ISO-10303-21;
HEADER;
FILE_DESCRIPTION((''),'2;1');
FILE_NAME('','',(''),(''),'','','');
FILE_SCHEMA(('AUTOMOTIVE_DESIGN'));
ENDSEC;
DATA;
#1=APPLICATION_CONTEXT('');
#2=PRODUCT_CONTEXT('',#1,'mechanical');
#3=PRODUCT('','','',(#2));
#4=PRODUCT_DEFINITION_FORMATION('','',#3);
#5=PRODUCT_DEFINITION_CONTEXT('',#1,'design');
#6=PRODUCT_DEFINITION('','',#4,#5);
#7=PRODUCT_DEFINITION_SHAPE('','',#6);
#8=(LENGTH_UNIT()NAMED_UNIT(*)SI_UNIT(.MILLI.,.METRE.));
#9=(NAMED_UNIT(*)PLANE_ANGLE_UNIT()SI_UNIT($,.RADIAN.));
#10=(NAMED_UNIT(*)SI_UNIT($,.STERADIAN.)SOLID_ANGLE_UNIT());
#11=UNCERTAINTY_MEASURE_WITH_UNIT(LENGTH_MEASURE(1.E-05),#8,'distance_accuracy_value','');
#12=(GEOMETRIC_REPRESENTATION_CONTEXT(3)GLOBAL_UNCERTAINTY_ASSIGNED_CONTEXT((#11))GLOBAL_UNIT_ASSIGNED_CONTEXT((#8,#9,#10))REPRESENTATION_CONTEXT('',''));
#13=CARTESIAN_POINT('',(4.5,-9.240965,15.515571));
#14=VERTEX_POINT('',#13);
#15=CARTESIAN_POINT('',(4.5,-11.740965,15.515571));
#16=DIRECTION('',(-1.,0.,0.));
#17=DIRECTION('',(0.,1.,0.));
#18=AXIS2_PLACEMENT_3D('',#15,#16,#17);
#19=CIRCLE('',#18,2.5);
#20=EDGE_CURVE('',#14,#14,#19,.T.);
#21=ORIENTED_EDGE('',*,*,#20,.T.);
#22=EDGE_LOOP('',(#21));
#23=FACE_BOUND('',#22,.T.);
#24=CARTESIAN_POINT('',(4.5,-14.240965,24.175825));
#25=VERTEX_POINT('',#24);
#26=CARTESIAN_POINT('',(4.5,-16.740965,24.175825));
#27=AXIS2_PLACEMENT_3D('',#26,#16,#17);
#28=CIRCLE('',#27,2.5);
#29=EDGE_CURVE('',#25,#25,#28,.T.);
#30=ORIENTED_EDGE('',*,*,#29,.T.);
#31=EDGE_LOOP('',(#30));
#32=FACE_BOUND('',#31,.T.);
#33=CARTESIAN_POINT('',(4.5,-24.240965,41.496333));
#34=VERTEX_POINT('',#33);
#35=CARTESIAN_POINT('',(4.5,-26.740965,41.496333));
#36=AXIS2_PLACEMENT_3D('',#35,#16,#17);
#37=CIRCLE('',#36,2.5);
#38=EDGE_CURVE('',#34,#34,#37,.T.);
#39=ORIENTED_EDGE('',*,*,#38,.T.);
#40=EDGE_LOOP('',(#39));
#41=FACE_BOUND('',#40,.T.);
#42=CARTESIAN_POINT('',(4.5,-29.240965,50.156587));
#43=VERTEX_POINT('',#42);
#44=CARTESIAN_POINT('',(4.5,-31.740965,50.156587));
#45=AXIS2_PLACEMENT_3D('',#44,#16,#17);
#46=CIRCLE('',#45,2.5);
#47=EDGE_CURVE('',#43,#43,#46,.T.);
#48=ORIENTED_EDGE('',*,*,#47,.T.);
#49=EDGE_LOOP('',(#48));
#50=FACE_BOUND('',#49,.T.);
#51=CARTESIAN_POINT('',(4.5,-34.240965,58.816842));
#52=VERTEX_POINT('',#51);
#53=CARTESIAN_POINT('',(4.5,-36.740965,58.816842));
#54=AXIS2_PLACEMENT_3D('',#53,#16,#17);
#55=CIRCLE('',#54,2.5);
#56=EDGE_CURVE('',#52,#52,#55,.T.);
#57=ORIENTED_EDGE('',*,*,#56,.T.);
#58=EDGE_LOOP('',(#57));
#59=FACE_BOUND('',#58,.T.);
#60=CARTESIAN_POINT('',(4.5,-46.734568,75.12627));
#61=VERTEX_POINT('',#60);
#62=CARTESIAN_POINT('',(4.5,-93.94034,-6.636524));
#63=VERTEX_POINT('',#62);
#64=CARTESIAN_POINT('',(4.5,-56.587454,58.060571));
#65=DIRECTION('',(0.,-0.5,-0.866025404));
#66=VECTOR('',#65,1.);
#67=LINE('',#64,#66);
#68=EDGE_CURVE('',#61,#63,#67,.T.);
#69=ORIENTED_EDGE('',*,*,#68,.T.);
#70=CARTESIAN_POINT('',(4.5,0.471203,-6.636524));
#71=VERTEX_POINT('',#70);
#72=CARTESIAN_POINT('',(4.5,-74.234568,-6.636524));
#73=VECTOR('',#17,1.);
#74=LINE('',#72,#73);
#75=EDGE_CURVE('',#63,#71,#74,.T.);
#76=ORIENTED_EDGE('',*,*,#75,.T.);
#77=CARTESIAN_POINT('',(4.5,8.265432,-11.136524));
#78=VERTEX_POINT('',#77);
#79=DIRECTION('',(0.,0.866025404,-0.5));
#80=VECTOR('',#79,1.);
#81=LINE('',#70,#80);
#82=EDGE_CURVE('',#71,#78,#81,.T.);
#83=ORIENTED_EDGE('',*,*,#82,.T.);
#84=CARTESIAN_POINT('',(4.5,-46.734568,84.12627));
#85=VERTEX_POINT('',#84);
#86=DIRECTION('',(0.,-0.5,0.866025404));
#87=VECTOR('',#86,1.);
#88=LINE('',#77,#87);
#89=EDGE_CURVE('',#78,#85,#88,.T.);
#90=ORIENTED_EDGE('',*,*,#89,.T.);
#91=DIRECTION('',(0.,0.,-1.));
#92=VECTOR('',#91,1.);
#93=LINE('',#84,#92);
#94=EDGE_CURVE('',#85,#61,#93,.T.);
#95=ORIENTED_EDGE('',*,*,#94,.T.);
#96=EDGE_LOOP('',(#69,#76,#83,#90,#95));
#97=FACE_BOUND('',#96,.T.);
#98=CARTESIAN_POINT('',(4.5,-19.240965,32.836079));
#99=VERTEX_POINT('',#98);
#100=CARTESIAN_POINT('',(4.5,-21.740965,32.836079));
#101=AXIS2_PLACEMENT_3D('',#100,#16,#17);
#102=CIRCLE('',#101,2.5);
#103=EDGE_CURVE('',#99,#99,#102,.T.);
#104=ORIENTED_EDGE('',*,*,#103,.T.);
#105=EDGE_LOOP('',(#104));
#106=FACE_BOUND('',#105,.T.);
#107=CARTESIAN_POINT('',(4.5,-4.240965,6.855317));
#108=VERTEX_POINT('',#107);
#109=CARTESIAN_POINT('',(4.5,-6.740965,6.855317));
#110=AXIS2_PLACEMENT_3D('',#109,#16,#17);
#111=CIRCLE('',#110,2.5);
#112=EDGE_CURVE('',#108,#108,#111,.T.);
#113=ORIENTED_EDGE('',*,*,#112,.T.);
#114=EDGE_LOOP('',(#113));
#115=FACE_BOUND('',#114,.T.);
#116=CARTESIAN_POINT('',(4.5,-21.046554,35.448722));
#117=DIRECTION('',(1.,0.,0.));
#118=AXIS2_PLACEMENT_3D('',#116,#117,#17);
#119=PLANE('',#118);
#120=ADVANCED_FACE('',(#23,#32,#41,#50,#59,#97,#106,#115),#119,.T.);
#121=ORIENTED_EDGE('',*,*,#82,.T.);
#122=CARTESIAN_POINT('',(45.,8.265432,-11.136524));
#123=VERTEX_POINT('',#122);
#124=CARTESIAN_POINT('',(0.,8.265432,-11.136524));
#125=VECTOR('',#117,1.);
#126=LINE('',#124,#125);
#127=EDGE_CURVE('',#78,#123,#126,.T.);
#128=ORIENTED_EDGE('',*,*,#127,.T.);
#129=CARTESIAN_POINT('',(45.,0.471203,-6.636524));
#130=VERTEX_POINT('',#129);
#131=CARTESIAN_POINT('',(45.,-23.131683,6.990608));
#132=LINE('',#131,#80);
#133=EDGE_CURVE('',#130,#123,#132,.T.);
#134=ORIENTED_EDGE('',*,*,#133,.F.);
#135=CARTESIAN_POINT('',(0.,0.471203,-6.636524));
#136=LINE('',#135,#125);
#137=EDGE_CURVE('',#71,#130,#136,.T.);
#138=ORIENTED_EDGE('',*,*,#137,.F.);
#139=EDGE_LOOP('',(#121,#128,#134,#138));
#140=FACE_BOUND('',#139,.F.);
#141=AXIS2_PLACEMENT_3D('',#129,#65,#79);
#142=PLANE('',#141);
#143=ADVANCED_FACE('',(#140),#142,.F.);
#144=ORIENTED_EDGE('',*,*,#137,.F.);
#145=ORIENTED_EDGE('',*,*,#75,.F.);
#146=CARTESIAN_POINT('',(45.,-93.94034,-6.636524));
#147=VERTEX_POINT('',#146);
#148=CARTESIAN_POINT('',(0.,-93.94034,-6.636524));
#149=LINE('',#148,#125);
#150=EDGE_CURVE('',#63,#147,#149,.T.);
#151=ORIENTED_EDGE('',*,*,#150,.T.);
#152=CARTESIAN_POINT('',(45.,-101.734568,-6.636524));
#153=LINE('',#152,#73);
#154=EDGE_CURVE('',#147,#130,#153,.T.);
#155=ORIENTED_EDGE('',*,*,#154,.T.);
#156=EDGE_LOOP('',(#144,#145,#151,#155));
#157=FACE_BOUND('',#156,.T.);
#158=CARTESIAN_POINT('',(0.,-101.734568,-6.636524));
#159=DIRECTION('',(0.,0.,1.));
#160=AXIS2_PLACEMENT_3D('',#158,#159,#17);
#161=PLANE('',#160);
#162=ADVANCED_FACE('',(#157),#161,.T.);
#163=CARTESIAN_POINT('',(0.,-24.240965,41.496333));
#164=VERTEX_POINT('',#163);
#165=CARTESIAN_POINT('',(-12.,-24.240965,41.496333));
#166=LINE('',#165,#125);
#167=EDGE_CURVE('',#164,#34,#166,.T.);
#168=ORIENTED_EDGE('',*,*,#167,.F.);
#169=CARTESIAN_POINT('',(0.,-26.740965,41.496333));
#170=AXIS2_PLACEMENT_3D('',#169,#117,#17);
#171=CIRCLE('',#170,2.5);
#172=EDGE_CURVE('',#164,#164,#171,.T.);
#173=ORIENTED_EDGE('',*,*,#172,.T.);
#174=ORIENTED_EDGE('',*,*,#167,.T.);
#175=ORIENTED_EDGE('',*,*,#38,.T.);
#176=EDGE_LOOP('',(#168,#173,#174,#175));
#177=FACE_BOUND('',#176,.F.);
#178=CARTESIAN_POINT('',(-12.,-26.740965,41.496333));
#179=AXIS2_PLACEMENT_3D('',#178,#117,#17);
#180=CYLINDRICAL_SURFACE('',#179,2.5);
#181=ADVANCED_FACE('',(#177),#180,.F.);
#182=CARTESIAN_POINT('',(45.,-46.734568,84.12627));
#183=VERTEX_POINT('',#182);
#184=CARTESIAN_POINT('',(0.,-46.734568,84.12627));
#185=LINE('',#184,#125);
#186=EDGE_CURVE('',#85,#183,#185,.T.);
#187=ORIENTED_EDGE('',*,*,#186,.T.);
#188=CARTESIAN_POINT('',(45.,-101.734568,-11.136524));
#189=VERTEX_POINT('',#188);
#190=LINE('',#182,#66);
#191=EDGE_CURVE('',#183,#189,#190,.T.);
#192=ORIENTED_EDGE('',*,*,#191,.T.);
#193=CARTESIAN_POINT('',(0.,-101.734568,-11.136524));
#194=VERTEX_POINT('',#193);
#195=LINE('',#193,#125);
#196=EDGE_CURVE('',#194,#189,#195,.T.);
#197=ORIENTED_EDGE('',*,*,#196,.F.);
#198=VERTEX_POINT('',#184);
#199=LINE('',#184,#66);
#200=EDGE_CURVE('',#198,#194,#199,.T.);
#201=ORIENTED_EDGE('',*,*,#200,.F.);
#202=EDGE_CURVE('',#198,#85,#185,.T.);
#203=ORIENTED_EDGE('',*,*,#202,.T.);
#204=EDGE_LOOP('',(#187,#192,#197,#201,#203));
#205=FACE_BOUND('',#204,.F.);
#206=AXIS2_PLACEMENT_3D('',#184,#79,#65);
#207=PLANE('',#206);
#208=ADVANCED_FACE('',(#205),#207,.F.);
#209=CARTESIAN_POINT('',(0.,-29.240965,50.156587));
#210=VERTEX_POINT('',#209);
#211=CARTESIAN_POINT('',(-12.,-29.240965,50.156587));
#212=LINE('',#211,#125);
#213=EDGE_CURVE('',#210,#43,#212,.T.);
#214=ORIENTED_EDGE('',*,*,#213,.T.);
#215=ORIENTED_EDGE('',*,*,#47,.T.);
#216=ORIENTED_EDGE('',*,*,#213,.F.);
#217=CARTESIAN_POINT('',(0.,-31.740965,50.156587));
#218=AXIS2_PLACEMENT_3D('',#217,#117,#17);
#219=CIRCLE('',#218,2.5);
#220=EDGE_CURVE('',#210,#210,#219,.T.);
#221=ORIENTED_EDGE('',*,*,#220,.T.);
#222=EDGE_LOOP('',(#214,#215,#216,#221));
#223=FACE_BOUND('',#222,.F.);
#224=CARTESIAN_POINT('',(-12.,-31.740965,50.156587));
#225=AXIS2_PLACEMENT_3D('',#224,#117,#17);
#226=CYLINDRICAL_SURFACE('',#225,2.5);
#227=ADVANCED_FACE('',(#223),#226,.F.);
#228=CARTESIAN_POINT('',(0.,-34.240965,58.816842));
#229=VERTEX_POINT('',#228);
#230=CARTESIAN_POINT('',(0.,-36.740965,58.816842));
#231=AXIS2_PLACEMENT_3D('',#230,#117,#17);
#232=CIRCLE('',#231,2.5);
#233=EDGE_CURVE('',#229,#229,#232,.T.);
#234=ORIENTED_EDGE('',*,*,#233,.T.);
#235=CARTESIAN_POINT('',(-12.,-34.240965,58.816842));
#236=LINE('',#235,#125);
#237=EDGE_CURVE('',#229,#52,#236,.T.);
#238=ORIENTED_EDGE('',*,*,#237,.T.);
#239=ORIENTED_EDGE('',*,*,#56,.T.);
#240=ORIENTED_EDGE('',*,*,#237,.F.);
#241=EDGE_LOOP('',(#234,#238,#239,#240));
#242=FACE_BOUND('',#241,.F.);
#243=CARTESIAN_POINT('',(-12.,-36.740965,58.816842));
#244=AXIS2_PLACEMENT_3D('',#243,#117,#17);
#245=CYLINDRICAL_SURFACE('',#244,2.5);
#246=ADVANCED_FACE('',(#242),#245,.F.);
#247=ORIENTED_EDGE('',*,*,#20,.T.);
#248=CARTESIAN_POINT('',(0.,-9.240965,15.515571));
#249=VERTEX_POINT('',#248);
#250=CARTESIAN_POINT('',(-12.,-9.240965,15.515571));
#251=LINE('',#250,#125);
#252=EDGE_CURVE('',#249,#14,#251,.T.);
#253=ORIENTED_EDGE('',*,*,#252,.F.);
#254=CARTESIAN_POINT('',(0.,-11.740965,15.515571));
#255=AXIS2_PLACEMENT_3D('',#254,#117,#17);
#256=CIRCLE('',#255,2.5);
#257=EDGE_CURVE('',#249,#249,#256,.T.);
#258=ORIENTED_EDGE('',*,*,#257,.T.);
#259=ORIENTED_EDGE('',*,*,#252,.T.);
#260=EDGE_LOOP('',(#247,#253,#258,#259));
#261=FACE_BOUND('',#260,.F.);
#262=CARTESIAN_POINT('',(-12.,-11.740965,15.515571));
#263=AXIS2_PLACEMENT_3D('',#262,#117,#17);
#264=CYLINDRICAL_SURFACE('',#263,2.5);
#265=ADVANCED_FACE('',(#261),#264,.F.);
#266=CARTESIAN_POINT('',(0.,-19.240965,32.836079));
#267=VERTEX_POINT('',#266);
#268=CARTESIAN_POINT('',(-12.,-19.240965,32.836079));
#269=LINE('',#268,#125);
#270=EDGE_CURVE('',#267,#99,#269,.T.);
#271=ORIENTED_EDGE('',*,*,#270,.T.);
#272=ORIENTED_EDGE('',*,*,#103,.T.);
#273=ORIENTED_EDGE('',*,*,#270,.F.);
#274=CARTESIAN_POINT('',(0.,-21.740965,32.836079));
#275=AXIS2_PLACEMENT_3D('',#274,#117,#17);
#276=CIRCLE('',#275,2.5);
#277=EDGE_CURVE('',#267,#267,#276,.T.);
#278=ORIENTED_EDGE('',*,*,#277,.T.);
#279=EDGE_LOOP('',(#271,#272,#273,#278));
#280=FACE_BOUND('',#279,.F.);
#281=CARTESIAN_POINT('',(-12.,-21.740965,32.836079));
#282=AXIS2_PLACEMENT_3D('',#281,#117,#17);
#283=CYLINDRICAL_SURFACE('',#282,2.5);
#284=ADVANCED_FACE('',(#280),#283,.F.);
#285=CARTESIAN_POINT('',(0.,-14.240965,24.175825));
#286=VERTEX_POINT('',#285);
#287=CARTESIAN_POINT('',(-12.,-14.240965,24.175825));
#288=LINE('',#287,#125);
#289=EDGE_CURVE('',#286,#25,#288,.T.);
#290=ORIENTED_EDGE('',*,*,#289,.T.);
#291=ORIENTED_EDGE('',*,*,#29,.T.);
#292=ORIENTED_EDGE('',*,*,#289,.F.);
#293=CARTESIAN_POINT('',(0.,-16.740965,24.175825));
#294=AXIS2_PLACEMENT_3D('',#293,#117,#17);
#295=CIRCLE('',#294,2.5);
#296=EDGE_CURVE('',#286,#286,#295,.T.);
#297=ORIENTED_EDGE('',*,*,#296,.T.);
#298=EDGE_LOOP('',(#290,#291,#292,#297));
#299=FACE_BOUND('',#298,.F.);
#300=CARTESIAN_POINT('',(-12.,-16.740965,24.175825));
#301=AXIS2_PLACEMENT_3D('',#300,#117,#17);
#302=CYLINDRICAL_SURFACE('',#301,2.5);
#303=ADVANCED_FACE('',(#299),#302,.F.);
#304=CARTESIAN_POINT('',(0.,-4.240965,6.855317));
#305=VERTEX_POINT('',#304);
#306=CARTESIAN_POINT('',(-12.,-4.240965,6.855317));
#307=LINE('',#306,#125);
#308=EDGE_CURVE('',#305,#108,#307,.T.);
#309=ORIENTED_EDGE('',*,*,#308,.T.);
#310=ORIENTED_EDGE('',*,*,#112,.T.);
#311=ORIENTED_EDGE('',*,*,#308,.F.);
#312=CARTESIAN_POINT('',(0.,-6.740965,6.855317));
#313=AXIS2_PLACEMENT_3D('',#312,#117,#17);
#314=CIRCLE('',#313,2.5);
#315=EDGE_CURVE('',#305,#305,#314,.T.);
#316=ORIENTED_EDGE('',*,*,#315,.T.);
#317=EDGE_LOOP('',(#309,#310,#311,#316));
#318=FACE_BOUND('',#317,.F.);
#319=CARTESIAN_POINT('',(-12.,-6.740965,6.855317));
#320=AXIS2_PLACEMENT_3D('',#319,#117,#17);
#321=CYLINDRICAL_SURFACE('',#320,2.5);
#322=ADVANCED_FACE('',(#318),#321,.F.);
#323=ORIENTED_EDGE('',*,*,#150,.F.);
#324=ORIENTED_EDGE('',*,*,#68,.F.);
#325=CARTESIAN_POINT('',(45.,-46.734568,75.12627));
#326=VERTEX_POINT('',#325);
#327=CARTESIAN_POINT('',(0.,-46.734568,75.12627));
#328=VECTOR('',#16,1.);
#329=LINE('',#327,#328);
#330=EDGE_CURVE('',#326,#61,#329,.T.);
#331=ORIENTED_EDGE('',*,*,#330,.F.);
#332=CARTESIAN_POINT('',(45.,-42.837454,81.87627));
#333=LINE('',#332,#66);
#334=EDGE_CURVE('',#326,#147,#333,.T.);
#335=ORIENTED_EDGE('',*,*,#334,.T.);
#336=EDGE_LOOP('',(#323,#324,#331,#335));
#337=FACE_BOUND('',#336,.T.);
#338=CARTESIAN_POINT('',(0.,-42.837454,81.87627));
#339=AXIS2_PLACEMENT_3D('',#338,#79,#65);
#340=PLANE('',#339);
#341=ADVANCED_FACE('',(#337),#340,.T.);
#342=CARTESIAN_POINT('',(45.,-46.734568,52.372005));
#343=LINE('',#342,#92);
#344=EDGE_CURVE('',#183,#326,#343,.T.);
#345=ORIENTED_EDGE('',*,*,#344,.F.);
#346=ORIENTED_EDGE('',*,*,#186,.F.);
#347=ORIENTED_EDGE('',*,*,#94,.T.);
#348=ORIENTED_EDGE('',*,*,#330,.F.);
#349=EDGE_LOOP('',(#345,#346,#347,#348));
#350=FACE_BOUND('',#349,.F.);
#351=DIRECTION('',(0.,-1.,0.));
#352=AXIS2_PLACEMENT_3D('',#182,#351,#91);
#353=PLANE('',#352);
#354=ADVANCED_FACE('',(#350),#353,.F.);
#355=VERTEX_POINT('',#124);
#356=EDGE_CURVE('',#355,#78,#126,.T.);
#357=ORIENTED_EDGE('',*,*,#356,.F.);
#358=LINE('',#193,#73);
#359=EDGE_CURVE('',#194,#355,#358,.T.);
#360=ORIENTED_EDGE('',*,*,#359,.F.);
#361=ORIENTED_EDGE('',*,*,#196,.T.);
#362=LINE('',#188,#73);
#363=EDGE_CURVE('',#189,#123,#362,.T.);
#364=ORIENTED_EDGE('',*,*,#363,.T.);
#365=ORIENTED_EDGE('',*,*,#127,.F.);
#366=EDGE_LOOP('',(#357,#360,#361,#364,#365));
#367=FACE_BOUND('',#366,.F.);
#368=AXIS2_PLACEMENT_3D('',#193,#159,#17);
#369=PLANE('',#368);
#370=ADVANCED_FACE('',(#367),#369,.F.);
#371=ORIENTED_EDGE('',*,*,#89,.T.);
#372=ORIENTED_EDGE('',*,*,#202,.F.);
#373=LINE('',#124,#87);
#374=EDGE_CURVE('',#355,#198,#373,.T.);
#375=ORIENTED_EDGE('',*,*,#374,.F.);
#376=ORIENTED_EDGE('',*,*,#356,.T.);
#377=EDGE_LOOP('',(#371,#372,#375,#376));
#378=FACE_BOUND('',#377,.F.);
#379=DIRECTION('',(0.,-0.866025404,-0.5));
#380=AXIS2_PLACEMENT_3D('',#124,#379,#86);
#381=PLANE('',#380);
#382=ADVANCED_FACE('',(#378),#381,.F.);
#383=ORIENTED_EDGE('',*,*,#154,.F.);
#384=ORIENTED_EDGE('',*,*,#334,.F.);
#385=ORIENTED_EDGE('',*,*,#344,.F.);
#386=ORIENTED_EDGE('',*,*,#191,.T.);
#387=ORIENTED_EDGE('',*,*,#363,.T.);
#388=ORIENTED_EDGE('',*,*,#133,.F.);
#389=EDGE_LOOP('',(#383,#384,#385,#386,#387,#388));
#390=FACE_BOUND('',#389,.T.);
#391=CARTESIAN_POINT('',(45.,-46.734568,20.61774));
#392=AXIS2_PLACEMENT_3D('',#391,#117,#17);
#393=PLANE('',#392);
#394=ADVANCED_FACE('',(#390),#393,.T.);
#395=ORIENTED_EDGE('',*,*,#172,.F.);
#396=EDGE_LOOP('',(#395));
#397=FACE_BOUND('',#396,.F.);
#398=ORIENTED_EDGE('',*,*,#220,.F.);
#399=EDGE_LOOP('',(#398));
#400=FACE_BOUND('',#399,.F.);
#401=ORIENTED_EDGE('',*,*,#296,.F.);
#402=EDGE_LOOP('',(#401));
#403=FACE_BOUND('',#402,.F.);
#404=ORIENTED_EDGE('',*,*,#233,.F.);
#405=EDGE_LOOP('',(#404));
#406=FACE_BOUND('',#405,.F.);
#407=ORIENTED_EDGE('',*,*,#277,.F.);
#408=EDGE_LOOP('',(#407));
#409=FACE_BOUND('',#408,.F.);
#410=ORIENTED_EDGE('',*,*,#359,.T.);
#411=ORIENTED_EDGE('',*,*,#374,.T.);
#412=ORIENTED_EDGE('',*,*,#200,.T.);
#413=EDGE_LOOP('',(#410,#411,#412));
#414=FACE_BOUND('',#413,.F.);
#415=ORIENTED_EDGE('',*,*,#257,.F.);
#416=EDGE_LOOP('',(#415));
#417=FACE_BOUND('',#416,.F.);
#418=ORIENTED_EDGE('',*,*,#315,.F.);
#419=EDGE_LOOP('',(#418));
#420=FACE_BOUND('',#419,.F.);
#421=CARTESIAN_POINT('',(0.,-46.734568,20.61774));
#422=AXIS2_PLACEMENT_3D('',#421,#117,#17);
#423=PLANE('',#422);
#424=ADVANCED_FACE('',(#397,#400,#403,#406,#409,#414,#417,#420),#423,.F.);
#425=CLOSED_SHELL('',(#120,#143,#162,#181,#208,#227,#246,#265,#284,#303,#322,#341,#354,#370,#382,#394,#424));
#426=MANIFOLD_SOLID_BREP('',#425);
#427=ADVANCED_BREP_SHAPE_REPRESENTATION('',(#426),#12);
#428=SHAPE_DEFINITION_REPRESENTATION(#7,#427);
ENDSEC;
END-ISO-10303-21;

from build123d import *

# Parameters (mm, degrees)
F1_DEPTH = 45
F2_T     = -4.5
F4_D     = 5
F4_DEPTH = 12
F4_TIP   = 1.5021515476
F6_DEPTH = 40.5


with BuildPart() as f1:
    # F0 (on Right) → F1 (new body)
    with BuildSketch(Plane.YZ):
        Polygon((-46.7345683003, 84.126270037), (-101.7345683003, -11.1365243793), (8.2654316997, -11.1365243793), align=None)
    extrude(amount=F1_DEPTH)

    # F2
    f2_openings = [f1.faces().sort_by_distance(p)[0] for p in [
        (45, -46.734568, 20.61774),
    ]]
    offset(amount=F2_T, openings=f2_openings)

    # F4
    with Locations(Plane(origin=(0, 0, 0), x_dir=(0, -1, 0), z_dir=(-1, 0, 0))):
        with Locations((36.7409650803, 58.8168415093), (31.7409650803, 50.1565874715), (26.7409650803, 41.4963334336), (21.7409650803, 32.8360793958), (16.7409650803, 24.1758253579), (11.7409650803, 15.5155713201), (6.7409650803, 6.8553172823)):
            Hole(F4_D / 2, depth=F4_DEPTH)
            with Locations((0, 0, -(F4_DEPTH + F4_TIP / 2))):  # 118° drill point
                Cone(0, F4_D / 2, F4_TIP, mode=Mode.SUBTRACT)

    # F5 (on face) → F6 (cut, symmetric)
    with BuildSketch(Plane.YZ.offset(45)):
        Polygon((-46.7345683003, 84.126270037), (-46.7345683003, 75.126270037), (0.4712030657, -6.6365243793), (8.2654316997, -11.1365243793), align=None)
    extrude(amount=F6_DEPTH, both=True, mode=Mode.SUBTRACT)


solid = f1.part
